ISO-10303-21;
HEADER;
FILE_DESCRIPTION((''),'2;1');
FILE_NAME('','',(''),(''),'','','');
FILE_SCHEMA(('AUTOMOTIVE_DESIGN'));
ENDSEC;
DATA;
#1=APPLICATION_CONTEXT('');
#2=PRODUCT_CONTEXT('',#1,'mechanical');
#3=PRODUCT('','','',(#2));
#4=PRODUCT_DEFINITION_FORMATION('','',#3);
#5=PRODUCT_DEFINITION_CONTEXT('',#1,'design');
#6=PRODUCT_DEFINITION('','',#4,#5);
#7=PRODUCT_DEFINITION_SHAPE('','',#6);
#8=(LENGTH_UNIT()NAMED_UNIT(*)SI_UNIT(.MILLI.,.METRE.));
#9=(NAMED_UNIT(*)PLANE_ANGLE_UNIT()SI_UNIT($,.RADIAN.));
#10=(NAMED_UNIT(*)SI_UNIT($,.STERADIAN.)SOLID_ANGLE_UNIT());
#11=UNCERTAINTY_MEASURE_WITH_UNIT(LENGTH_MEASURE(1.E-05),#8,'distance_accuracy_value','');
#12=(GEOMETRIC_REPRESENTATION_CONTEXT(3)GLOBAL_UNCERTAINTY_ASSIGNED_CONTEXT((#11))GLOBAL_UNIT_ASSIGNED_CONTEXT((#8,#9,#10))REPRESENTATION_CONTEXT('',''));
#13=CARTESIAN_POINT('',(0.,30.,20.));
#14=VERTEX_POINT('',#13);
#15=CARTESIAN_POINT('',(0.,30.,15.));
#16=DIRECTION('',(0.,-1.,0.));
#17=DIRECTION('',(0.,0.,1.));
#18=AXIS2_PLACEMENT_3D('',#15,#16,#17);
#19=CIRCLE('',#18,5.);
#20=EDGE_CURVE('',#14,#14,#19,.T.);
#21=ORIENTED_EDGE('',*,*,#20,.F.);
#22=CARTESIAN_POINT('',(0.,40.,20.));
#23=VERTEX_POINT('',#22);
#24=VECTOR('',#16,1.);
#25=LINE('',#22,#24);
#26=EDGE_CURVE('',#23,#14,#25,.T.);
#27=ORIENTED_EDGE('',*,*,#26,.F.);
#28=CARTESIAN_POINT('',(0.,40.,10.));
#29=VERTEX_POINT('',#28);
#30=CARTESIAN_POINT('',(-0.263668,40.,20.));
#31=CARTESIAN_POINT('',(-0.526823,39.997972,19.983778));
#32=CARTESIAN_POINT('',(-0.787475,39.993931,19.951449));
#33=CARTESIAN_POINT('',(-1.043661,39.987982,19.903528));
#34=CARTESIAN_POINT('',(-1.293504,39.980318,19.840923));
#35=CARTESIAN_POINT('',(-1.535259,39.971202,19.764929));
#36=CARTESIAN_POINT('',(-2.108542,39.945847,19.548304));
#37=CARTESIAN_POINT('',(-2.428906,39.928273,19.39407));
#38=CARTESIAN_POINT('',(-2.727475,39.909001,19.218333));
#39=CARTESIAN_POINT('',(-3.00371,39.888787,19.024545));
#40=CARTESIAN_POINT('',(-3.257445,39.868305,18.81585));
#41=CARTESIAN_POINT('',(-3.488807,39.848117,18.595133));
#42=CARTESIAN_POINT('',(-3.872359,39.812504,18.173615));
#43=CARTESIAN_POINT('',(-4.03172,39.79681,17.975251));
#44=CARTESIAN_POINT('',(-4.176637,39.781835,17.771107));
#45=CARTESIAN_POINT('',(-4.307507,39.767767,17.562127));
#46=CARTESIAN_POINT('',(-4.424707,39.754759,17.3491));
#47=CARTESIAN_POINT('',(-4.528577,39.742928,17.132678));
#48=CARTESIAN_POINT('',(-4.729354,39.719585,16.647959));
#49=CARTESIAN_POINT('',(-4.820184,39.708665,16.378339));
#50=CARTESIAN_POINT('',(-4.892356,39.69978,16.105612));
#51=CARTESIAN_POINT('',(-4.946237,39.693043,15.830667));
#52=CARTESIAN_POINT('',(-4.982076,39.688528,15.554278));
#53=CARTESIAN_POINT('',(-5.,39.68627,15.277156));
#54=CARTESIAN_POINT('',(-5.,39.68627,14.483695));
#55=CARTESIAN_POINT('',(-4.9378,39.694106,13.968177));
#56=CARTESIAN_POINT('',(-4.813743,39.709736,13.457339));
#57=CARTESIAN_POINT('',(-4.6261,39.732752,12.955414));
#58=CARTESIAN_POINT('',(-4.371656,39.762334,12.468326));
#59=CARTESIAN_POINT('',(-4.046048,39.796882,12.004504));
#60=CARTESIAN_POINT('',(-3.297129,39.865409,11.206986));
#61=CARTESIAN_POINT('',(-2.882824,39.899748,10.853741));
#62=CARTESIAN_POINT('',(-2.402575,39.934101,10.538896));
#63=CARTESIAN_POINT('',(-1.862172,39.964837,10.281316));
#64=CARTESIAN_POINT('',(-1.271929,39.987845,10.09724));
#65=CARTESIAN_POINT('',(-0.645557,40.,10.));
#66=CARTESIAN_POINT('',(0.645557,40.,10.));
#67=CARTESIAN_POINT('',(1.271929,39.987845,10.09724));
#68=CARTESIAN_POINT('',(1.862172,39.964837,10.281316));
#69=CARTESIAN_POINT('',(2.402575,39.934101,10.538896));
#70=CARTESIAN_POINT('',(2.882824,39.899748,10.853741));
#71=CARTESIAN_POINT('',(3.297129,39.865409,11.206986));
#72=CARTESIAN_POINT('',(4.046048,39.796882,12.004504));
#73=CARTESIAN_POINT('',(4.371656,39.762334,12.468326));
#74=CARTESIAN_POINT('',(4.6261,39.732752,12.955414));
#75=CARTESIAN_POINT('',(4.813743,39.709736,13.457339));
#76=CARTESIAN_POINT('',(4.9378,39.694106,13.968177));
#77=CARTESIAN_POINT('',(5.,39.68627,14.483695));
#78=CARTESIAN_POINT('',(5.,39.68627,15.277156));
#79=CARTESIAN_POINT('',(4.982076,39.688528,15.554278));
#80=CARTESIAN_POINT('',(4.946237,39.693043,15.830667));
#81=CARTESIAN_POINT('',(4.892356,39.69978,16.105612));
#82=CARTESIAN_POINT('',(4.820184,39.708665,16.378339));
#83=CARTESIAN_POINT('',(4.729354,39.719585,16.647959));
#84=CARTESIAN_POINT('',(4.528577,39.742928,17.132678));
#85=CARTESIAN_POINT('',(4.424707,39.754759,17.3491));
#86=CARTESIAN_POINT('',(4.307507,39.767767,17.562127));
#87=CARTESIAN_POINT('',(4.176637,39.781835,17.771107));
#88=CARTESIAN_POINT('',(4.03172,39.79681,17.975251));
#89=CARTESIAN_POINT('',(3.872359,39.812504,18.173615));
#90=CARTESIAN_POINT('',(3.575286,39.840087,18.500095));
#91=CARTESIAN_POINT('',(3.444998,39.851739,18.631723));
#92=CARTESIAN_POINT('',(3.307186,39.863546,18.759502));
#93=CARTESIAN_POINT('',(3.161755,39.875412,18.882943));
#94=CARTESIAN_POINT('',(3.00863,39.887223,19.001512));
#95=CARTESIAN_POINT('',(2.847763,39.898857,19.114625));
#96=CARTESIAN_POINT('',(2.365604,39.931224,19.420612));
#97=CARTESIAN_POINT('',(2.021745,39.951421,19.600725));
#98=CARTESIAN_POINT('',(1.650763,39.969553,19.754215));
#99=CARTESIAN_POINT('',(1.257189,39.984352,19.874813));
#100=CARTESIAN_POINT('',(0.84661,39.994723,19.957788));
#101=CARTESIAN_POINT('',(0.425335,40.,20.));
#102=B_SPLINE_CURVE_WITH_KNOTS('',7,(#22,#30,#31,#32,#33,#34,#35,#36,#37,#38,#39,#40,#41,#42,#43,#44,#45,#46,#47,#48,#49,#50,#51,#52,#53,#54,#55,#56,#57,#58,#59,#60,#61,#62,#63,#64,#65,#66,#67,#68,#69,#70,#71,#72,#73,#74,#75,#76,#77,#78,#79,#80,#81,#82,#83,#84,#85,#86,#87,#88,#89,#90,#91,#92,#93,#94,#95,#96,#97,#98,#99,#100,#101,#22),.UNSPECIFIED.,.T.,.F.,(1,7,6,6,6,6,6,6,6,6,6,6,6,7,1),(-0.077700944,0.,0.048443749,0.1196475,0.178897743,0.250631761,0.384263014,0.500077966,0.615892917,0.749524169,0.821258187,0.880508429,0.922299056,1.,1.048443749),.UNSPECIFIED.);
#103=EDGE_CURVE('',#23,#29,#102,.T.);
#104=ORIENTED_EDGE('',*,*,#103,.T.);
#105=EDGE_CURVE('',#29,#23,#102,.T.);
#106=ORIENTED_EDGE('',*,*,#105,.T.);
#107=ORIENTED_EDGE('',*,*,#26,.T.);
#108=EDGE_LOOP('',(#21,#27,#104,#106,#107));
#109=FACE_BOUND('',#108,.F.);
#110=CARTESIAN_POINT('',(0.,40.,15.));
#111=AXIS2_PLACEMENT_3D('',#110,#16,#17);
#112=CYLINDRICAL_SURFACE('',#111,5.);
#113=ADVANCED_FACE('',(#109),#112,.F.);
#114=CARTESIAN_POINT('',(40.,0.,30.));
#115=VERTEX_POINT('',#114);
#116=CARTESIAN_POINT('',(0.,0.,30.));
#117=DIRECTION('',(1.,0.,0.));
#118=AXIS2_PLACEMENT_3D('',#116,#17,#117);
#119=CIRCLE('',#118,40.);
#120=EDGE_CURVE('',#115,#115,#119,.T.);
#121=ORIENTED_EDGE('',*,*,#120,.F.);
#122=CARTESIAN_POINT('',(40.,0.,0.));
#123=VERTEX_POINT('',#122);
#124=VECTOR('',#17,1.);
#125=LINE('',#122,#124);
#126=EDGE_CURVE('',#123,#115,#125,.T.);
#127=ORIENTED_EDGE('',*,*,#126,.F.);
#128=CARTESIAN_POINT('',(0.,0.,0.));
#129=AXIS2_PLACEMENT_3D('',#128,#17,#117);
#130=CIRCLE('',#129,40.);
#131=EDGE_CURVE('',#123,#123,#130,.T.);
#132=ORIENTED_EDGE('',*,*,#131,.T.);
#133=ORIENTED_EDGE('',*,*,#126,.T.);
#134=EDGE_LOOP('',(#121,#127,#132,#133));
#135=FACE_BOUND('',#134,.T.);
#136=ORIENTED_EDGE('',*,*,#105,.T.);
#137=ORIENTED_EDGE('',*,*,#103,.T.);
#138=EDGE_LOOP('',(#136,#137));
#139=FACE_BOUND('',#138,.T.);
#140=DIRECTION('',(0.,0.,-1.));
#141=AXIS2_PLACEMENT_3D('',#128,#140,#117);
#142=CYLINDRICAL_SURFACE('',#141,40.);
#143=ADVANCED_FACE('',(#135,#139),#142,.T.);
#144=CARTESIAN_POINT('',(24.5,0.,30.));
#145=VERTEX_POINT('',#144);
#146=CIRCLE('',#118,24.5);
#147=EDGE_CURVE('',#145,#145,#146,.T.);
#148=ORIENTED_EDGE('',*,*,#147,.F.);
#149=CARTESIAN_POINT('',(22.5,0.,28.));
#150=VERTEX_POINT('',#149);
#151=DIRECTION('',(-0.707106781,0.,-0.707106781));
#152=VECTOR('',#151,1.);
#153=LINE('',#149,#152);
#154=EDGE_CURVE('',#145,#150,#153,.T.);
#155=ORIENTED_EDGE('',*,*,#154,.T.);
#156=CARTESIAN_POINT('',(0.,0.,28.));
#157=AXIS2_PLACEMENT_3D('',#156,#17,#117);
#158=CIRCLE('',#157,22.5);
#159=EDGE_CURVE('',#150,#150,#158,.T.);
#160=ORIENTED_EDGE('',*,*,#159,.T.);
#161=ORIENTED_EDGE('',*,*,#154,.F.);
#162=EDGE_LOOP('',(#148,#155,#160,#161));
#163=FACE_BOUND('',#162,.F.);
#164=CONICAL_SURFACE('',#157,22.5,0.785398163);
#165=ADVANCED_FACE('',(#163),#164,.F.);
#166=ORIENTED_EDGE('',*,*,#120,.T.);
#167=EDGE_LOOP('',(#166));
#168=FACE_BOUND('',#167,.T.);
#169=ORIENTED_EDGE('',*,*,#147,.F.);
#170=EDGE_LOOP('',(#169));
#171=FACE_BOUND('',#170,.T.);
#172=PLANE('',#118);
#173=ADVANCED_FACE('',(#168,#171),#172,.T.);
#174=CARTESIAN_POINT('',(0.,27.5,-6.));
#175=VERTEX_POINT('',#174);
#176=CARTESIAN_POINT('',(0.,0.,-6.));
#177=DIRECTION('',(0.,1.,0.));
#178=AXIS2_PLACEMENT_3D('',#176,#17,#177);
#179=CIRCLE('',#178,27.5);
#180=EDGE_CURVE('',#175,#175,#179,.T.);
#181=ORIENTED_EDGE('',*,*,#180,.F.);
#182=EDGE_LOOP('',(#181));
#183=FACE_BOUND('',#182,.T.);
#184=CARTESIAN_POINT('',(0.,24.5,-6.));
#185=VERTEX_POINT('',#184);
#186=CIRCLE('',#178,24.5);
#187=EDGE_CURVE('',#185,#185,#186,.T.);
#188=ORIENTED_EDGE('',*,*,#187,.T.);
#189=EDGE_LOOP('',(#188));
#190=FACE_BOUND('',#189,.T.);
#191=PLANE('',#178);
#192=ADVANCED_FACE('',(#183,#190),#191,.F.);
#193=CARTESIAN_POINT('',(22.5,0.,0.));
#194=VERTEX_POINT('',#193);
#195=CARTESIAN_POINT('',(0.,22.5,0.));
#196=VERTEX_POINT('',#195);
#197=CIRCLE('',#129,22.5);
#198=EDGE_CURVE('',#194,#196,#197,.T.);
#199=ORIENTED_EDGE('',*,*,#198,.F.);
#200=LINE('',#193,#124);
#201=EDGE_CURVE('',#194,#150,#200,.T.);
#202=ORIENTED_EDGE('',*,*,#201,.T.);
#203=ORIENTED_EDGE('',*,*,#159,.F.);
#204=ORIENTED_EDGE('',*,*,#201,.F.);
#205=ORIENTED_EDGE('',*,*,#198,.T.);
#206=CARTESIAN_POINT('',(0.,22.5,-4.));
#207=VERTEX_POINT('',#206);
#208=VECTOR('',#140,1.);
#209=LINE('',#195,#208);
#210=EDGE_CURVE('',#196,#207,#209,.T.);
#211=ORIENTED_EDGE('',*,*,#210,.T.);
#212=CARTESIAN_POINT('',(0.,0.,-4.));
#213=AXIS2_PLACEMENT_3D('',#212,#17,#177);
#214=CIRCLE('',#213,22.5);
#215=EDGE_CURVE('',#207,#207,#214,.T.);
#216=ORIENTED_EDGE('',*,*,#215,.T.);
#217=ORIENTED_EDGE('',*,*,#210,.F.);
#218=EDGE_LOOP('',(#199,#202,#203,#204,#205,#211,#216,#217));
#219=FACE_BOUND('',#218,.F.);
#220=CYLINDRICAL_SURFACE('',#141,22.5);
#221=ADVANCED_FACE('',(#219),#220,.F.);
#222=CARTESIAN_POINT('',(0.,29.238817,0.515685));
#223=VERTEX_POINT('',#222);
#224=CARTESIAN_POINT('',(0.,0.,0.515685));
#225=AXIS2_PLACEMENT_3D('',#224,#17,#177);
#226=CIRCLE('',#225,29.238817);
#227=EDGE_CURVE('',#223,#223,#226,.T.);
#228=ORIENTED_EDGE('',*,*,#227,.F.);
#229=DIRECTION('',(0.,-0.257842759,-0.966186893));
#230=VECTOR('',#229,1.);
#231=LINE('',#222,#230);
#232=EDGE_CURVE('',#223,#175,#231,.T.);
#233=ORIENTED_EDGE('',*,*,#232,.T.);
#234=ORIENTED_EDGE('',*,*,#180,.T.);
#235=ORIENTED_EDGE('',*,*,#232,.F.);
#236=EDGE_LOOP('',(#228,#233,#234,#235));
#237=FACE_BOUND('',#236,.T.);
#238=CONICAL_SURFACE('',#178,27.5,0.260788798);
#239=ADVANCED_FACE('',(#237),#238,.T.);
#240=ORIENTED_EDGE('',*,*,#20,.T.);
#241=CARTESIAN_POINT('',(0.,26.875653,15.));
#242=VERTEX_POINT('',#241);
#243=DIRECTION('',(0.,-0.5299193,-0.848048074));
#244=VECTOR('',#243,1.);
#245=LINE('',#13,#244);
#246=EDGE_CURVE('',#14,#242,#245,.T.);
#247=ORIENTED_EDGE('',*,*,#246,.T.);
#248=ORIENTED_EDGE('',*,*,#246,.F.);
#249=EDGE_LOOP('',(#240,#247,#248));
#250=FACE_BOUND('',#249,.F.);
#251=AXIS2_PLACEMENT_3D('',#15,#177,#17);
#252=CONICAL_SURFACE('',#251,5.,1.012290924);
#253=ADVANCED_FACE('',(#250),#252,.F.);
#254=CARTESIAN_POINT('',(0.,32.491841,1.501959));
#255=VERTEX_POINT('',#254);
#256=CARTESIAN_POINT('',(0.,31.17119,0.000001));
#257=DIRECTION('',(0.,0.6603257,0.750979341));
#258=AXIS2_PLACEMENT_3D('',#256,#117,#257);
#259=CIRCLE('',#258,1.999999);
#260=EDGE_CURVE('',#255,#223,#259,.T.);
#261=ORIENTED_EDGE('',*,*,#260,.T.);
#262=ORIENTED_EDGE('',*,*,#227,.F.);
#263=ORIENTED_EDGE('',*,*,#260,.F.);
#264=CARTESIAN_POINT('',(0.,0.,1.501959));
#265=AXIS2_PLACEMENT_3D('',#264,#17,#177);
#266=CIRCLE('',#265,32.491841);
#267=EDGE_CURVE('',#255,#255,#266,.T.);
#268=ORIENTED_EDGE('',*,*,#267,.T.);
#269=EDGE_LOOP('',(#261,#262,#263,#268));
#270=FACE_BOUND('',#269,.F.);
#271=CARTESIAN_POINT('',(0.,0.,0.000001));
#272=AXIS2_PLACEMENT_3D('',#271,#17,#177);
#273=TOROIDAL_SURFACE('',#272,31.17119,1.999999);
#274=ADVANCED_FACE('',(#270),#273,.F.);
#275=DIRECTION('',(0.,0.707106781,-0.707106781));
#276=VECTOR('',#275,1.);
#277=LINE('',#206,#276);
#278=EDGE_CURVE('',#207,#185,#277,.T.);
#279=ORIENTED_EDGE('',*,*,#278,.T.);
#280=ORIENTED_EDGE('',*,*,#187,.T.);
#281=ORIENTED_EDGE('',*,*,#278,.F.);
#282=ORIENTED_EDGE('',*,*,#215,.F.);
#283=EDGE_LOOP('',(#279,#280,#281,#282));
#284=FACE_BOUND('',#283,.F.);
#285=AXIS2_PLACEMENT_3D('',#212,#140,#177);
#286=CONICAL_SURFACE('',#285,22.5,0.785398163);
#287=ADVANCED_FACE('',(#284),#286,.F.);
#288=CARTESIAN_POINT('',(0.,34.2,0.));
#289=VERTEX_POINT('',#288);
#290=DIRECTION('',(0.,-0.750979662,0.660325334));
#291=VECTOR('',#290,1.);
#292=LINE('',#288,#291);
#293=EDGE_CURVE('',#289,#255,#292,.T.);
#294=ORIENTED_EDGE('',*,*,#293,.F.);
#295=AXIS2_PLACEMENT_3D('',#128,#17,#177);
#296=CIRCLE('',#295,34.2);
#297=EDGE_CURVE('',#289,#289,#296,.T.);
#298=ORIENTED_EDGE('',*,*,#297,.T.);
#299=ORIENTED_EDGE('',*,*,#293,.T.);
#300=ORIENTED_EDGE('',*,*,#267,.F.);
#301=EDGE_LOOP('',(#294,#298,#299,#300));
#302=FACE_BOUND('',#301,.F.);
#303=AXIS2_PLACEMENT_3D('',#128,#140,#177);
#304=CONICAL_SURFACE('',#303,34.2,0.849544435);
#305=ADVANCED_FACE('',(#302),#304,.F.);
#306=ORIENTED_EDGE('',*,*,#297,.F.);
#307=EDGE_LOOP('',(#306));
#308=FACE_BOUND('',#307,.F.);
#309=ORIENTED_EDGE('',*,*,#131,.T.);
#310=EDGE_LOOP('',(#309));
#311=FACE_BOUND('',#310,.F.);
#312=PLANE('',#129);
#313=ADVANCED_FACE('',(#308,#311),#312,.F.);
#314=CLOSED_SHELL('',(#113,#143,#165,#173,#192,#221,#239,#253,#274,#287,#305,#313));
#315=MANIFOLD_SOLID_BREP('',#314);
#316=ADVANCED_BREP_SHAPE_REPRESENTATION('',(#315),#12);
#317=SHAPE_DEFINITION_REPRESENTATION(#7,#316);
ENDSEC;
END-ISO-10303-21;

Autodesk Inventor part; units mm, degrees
ref_plane "YZ Plane" through (0, 0, 0) normal (1, 0, 0) x (0, 1, 0)
ref_plane "XZ Plane" through (0, 0, 0) normal (0, 1, 0) x (-1, 0, 0)
ref_plane "XY Plane" through (0, 0, 0) normal (0, 0, 1) x (1, 0, 0)
sketch "Эскиз1" plane through (0, 0, 0) normal (0, 0, 1) x (1, 0, 0)
  circle A0 centre (0, 0) radius 40
  circle A1 centre (0, 0) radius 22.5
  dimension "d0" = 80
  dimension "d1" = 45
extrude "Выдавливание1" add sketch "Эскиз1" along normal blind 30
sketch "Эскиз2" plane through (0, 0, 0) normal (1, 0, 0) x (0, 1, 0)
  line L0 (40, 0) -> (-40, 0)
  line L1 (22.5, 30) -> (22.5, 0)
  line L2 (22.5, 0) -> (22.5, -6)
  line L3 (22.5, -6) -> (27.5, -6)
  arc A0 (32.491841, 1.501959) -> (29.238817, 0.515685) centre (31.17119, 0) ccw
  line L4 (27.5, -6) -> (29.238817, 0.515685)
  line L5 (34.2, 0) -> (32.491841, 1.501959)
  line L6 (0, -13.2) -> (0, 37.2)
  point P0 (0, 0)
  point P1 (29.101198, 0)
  dimension "d4" = 5
  dimension "d5" = 6
  dimension "d6" = 4
  dimension "d9" = 27.5
  dimension "d10" = 29.23882
revolve "Вращение1" add sketch "Эскиз2" angle 360 about axis through (0, 0, -10) along (0, 0, 1) contours L4 L3 L2 L0
revolve "Вращение2" cut sketch "Эскиз2" angle 360 about axis through (0, 0, -10) along (0, 0, 1) contours L0 L4 A0 L5
chamfer "Фаска1" distance 2 angle 45 2 edges at (0, -22.5, -6) (-22.5, 0, 30)
sketch "Эскиз3" plane through (0, 0, 0) normal (1, 0, 0) x (0, 1, 0)
  line L0 (40, 0) -> (40, 30)
  line L1 (40, 15) -> (26.875653, 15)
  line L2 (40, 15) -> (40, 20)
  line L3 (40, 20) -> (30, 20)
  line L4 (30, 20) -> (26.606861, 14.569843)
  point P0 (0, 0)
  dimension "d14" = 10
  dimension "d15" = 58
revolve "Вращение3" cut sketch "Эскиз3" angle 360 about axis through (0, 40, 15) along (0, -1, 0)
thread "Резьба1" size "M45x4.5" class "6H" standard "ANSI Metric M Profile" full length
properties part number "Гайка шток_CPY" material "Сталь, высокопрочная, низколегированная"
